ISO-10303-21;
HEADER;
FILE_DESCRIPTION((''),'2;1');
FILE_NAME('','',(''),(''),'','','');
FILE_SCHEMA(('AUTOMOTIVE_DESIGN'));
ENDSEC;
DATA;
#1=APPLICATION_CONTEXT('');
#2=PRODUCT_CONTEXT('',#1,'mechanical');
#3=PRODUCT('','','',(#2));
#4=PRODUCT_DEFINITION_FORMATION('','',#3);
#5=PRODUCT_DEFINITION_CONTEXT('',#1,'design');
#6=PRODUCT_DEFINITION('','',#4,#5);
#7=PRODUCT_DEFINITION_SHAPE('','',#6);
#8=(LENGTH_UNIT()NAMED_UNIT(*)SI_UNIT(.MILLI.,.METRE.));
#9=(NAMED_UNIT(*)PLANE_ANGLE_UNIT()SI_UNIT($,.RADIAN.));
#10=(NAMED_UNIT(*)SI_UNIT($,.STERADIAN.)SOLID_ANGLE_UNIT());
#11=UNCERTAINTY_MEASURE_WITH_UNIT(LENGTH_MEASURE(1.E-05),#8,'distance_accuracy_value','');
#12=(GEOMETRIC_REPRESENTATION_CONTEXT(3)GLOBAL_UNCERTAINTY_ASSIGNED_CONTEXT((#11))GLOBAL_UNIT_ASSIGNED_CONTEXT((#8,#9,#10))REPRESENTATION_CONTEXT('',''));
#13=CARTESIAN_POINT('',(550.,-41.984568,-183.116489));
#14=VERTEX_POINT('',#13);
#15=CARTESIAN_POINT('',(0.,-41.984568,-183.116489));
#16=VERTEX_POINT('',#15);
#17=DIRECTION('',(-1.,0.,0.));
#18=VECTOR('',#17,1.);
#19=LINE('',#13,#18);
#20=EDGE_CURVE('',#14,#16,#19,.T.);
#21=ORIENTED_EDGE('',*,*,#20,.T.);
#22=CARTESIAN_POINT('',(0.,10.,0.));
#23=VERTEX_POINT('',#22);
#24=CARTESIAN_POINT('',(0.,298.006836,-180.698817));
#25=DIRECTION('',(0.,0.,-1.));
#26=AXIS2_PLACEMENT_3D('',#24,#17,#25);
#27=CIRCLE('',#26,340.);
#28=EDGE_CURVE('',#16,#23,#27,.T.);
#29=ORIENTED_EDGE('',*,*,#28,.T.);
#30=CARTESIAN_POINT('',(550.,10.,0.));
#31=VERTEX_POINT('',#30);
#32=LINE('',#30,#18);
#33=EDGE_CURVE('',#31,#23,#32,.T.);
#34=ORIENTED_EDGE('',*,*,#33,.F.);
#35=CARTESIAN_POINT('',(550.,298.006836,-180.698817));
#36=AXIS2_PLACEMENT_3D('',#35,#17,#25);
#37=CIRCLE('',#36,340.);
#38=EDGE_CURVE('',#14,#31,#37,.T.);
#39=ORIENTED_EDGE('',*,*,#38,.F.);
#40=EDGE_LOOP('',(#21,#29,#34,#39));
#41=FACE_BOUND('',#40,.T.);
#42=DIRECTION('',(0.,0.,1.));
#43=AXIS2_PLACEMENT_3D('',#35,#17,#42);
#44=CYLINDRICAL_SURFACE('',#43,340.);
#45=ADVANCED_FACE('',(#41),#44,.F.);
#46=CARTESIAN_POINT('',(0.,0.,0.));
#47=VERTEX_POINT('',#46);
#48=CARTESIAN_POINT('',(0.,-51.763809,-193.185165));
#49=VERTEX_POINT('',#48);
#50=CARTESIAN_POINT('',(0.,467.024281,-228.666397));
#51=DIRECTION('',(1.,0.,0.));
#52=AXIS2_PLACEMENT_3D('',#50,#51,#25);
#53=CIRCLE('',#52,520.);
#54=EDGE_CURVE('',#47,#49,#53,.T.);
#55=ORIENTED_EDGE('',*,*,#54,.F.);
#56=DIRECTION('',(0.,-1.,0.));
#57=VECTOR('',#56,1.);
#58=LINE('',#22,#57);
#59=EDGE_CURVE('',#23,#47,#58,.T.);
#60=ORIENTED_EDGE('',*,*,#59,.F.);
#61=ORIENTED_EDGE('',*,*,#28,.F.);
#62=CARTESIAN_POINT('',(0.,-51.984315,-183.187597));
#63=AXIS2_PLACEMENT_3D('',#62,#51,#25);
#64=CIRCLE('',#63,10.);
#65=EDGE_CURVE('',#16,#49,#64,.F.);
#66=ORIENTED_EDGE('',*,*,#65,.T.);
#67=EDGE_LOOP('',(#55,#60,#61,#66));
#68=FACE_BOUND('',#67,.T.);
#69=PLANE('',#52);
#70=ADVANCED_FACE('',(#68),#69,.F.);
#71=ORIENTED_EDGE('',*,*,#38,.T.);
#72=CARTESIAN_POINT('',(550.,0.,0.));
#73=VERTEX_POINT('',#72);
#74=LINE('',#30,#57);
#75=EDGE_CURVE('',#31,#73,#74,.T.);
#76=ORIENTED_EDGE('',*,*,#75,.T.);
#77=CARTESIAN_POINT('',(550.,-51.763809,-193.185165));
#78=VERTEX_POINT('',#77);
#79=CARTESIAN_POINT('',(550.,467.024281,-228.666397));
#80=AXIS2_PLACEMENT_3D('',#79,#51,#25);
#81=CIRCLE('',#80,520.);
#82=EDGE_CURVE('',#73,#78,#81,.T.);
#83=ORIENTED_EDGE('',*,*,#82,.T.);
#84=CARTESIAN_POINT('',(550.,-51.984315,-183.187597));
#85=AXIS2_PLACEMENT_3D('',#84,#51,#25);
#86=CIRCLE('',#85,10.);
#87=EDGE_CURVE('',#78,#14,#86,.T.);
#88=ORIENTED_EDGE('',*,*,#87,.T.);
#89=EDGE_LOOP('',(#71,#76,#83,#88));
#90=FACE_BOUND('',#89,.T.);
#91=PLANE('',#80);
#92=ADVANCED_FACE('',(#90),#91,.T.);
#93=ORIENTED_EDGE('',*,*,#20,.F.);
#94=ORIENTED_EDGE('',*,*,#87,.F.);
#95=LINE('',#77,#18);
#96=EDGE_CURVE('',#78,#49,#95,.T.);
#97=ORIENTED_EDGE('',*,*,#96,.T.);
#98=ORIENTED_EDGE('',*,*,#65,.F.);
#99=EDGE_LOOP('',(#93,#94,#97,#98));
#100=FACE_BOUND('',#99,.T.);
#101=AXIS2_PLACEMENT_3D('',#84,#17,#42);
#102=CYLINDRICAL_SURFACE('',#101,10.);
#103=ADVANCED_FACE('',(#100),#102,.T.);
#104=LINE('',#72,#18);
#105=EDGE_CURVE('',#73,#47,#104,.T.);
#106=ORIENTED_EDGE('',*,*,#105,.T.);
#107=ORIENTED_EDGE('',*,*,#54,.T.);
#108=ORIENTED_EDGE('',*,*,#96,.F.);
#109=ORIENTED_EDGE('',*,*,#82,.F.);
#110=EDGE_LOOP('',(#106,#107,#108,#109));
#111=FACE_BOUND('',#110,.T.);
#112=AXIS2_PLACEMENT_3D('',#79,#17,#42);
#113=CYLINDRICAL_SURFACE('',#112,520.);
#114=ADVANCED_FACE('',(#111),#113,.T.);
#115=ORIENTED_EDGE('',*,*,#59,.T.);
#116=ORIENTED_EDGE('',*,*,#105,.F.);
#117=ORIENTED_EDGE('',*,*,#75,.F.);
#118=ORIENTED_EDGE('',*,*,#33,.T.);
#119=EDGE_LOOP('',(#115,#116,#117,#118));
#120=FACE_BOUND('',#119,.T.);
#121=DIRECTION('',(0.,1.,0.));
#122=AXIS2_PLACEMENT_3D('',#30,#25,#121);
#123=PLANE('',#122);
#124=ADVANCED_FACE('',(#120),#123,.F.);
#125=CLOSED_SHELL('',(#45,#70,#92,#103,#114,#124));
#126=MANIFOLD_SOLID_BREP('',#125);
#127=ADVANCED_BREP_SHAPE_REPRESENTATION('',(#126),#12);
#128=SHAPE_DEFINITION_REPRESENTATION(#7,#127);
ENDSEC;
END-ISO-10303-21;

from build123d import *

# Parameters (mm, degrees)
BOSS_EXTRUDE1_DEPTH = 550
FILLET1_R           = 10


with BuildPart() as part:
    # Sketch1 → Boss-Extrude1 (new body)
    with BuildSketch(Plane(origin=(0, 0, 0), x_dir=(0, 0, -1), z_dir=(1, 0, 0))):
        with BuildLine():
            Line((193.185165258, -51.763809021), (193.185165258, -41.763809021))
            ThreePointArc((193.185165258, -41.763809021), (92.700341785, -30.407945096), (0, 10))
            Line((0, 10), (0, 0))
            ThreePointArc((0, 0), (94.080493489, -35.257148814), (193.185165258, -51.763809021))
        make_face()
    extrude(amount=BOSS_EXTRUDE1_DEPTH)

    # Fillet1
    # the kernel refuses this fillet: 10 mm, written as the material it takes off along each edge
    with BuildSketch(Plane(origin=(-25.177740899, -41.763809021, -193.185165258), x_dir=(0, -1, 0), z_dir=(1, 0, 0))) as fillet1_piece_1:
        with BuildLine():
            CenterArc((10.22050642, -9.99756855), FILLET1_R, 91.263511131, 89.143911064)
            Line((0.220759241, -10.068676539), (0.020764297, -10.070098698))
            ThreePointArc((0.020764297, -10.070098698), (-0.052289908, -5.037904855), (-0.199865085, -0.007344911))
            Line((-0.199865085, -0.007344911), (0, 0.2))
            ThreePointArc((0, 0.2), (5, 0.2), (9.995589872, 0.199951371))
            Line((9.995589872, 0.199951371), (10, 0))
        make_face()
    extrude(amount=600.355481797, mode=Mode.SUBTRACT)


solid = part.part
